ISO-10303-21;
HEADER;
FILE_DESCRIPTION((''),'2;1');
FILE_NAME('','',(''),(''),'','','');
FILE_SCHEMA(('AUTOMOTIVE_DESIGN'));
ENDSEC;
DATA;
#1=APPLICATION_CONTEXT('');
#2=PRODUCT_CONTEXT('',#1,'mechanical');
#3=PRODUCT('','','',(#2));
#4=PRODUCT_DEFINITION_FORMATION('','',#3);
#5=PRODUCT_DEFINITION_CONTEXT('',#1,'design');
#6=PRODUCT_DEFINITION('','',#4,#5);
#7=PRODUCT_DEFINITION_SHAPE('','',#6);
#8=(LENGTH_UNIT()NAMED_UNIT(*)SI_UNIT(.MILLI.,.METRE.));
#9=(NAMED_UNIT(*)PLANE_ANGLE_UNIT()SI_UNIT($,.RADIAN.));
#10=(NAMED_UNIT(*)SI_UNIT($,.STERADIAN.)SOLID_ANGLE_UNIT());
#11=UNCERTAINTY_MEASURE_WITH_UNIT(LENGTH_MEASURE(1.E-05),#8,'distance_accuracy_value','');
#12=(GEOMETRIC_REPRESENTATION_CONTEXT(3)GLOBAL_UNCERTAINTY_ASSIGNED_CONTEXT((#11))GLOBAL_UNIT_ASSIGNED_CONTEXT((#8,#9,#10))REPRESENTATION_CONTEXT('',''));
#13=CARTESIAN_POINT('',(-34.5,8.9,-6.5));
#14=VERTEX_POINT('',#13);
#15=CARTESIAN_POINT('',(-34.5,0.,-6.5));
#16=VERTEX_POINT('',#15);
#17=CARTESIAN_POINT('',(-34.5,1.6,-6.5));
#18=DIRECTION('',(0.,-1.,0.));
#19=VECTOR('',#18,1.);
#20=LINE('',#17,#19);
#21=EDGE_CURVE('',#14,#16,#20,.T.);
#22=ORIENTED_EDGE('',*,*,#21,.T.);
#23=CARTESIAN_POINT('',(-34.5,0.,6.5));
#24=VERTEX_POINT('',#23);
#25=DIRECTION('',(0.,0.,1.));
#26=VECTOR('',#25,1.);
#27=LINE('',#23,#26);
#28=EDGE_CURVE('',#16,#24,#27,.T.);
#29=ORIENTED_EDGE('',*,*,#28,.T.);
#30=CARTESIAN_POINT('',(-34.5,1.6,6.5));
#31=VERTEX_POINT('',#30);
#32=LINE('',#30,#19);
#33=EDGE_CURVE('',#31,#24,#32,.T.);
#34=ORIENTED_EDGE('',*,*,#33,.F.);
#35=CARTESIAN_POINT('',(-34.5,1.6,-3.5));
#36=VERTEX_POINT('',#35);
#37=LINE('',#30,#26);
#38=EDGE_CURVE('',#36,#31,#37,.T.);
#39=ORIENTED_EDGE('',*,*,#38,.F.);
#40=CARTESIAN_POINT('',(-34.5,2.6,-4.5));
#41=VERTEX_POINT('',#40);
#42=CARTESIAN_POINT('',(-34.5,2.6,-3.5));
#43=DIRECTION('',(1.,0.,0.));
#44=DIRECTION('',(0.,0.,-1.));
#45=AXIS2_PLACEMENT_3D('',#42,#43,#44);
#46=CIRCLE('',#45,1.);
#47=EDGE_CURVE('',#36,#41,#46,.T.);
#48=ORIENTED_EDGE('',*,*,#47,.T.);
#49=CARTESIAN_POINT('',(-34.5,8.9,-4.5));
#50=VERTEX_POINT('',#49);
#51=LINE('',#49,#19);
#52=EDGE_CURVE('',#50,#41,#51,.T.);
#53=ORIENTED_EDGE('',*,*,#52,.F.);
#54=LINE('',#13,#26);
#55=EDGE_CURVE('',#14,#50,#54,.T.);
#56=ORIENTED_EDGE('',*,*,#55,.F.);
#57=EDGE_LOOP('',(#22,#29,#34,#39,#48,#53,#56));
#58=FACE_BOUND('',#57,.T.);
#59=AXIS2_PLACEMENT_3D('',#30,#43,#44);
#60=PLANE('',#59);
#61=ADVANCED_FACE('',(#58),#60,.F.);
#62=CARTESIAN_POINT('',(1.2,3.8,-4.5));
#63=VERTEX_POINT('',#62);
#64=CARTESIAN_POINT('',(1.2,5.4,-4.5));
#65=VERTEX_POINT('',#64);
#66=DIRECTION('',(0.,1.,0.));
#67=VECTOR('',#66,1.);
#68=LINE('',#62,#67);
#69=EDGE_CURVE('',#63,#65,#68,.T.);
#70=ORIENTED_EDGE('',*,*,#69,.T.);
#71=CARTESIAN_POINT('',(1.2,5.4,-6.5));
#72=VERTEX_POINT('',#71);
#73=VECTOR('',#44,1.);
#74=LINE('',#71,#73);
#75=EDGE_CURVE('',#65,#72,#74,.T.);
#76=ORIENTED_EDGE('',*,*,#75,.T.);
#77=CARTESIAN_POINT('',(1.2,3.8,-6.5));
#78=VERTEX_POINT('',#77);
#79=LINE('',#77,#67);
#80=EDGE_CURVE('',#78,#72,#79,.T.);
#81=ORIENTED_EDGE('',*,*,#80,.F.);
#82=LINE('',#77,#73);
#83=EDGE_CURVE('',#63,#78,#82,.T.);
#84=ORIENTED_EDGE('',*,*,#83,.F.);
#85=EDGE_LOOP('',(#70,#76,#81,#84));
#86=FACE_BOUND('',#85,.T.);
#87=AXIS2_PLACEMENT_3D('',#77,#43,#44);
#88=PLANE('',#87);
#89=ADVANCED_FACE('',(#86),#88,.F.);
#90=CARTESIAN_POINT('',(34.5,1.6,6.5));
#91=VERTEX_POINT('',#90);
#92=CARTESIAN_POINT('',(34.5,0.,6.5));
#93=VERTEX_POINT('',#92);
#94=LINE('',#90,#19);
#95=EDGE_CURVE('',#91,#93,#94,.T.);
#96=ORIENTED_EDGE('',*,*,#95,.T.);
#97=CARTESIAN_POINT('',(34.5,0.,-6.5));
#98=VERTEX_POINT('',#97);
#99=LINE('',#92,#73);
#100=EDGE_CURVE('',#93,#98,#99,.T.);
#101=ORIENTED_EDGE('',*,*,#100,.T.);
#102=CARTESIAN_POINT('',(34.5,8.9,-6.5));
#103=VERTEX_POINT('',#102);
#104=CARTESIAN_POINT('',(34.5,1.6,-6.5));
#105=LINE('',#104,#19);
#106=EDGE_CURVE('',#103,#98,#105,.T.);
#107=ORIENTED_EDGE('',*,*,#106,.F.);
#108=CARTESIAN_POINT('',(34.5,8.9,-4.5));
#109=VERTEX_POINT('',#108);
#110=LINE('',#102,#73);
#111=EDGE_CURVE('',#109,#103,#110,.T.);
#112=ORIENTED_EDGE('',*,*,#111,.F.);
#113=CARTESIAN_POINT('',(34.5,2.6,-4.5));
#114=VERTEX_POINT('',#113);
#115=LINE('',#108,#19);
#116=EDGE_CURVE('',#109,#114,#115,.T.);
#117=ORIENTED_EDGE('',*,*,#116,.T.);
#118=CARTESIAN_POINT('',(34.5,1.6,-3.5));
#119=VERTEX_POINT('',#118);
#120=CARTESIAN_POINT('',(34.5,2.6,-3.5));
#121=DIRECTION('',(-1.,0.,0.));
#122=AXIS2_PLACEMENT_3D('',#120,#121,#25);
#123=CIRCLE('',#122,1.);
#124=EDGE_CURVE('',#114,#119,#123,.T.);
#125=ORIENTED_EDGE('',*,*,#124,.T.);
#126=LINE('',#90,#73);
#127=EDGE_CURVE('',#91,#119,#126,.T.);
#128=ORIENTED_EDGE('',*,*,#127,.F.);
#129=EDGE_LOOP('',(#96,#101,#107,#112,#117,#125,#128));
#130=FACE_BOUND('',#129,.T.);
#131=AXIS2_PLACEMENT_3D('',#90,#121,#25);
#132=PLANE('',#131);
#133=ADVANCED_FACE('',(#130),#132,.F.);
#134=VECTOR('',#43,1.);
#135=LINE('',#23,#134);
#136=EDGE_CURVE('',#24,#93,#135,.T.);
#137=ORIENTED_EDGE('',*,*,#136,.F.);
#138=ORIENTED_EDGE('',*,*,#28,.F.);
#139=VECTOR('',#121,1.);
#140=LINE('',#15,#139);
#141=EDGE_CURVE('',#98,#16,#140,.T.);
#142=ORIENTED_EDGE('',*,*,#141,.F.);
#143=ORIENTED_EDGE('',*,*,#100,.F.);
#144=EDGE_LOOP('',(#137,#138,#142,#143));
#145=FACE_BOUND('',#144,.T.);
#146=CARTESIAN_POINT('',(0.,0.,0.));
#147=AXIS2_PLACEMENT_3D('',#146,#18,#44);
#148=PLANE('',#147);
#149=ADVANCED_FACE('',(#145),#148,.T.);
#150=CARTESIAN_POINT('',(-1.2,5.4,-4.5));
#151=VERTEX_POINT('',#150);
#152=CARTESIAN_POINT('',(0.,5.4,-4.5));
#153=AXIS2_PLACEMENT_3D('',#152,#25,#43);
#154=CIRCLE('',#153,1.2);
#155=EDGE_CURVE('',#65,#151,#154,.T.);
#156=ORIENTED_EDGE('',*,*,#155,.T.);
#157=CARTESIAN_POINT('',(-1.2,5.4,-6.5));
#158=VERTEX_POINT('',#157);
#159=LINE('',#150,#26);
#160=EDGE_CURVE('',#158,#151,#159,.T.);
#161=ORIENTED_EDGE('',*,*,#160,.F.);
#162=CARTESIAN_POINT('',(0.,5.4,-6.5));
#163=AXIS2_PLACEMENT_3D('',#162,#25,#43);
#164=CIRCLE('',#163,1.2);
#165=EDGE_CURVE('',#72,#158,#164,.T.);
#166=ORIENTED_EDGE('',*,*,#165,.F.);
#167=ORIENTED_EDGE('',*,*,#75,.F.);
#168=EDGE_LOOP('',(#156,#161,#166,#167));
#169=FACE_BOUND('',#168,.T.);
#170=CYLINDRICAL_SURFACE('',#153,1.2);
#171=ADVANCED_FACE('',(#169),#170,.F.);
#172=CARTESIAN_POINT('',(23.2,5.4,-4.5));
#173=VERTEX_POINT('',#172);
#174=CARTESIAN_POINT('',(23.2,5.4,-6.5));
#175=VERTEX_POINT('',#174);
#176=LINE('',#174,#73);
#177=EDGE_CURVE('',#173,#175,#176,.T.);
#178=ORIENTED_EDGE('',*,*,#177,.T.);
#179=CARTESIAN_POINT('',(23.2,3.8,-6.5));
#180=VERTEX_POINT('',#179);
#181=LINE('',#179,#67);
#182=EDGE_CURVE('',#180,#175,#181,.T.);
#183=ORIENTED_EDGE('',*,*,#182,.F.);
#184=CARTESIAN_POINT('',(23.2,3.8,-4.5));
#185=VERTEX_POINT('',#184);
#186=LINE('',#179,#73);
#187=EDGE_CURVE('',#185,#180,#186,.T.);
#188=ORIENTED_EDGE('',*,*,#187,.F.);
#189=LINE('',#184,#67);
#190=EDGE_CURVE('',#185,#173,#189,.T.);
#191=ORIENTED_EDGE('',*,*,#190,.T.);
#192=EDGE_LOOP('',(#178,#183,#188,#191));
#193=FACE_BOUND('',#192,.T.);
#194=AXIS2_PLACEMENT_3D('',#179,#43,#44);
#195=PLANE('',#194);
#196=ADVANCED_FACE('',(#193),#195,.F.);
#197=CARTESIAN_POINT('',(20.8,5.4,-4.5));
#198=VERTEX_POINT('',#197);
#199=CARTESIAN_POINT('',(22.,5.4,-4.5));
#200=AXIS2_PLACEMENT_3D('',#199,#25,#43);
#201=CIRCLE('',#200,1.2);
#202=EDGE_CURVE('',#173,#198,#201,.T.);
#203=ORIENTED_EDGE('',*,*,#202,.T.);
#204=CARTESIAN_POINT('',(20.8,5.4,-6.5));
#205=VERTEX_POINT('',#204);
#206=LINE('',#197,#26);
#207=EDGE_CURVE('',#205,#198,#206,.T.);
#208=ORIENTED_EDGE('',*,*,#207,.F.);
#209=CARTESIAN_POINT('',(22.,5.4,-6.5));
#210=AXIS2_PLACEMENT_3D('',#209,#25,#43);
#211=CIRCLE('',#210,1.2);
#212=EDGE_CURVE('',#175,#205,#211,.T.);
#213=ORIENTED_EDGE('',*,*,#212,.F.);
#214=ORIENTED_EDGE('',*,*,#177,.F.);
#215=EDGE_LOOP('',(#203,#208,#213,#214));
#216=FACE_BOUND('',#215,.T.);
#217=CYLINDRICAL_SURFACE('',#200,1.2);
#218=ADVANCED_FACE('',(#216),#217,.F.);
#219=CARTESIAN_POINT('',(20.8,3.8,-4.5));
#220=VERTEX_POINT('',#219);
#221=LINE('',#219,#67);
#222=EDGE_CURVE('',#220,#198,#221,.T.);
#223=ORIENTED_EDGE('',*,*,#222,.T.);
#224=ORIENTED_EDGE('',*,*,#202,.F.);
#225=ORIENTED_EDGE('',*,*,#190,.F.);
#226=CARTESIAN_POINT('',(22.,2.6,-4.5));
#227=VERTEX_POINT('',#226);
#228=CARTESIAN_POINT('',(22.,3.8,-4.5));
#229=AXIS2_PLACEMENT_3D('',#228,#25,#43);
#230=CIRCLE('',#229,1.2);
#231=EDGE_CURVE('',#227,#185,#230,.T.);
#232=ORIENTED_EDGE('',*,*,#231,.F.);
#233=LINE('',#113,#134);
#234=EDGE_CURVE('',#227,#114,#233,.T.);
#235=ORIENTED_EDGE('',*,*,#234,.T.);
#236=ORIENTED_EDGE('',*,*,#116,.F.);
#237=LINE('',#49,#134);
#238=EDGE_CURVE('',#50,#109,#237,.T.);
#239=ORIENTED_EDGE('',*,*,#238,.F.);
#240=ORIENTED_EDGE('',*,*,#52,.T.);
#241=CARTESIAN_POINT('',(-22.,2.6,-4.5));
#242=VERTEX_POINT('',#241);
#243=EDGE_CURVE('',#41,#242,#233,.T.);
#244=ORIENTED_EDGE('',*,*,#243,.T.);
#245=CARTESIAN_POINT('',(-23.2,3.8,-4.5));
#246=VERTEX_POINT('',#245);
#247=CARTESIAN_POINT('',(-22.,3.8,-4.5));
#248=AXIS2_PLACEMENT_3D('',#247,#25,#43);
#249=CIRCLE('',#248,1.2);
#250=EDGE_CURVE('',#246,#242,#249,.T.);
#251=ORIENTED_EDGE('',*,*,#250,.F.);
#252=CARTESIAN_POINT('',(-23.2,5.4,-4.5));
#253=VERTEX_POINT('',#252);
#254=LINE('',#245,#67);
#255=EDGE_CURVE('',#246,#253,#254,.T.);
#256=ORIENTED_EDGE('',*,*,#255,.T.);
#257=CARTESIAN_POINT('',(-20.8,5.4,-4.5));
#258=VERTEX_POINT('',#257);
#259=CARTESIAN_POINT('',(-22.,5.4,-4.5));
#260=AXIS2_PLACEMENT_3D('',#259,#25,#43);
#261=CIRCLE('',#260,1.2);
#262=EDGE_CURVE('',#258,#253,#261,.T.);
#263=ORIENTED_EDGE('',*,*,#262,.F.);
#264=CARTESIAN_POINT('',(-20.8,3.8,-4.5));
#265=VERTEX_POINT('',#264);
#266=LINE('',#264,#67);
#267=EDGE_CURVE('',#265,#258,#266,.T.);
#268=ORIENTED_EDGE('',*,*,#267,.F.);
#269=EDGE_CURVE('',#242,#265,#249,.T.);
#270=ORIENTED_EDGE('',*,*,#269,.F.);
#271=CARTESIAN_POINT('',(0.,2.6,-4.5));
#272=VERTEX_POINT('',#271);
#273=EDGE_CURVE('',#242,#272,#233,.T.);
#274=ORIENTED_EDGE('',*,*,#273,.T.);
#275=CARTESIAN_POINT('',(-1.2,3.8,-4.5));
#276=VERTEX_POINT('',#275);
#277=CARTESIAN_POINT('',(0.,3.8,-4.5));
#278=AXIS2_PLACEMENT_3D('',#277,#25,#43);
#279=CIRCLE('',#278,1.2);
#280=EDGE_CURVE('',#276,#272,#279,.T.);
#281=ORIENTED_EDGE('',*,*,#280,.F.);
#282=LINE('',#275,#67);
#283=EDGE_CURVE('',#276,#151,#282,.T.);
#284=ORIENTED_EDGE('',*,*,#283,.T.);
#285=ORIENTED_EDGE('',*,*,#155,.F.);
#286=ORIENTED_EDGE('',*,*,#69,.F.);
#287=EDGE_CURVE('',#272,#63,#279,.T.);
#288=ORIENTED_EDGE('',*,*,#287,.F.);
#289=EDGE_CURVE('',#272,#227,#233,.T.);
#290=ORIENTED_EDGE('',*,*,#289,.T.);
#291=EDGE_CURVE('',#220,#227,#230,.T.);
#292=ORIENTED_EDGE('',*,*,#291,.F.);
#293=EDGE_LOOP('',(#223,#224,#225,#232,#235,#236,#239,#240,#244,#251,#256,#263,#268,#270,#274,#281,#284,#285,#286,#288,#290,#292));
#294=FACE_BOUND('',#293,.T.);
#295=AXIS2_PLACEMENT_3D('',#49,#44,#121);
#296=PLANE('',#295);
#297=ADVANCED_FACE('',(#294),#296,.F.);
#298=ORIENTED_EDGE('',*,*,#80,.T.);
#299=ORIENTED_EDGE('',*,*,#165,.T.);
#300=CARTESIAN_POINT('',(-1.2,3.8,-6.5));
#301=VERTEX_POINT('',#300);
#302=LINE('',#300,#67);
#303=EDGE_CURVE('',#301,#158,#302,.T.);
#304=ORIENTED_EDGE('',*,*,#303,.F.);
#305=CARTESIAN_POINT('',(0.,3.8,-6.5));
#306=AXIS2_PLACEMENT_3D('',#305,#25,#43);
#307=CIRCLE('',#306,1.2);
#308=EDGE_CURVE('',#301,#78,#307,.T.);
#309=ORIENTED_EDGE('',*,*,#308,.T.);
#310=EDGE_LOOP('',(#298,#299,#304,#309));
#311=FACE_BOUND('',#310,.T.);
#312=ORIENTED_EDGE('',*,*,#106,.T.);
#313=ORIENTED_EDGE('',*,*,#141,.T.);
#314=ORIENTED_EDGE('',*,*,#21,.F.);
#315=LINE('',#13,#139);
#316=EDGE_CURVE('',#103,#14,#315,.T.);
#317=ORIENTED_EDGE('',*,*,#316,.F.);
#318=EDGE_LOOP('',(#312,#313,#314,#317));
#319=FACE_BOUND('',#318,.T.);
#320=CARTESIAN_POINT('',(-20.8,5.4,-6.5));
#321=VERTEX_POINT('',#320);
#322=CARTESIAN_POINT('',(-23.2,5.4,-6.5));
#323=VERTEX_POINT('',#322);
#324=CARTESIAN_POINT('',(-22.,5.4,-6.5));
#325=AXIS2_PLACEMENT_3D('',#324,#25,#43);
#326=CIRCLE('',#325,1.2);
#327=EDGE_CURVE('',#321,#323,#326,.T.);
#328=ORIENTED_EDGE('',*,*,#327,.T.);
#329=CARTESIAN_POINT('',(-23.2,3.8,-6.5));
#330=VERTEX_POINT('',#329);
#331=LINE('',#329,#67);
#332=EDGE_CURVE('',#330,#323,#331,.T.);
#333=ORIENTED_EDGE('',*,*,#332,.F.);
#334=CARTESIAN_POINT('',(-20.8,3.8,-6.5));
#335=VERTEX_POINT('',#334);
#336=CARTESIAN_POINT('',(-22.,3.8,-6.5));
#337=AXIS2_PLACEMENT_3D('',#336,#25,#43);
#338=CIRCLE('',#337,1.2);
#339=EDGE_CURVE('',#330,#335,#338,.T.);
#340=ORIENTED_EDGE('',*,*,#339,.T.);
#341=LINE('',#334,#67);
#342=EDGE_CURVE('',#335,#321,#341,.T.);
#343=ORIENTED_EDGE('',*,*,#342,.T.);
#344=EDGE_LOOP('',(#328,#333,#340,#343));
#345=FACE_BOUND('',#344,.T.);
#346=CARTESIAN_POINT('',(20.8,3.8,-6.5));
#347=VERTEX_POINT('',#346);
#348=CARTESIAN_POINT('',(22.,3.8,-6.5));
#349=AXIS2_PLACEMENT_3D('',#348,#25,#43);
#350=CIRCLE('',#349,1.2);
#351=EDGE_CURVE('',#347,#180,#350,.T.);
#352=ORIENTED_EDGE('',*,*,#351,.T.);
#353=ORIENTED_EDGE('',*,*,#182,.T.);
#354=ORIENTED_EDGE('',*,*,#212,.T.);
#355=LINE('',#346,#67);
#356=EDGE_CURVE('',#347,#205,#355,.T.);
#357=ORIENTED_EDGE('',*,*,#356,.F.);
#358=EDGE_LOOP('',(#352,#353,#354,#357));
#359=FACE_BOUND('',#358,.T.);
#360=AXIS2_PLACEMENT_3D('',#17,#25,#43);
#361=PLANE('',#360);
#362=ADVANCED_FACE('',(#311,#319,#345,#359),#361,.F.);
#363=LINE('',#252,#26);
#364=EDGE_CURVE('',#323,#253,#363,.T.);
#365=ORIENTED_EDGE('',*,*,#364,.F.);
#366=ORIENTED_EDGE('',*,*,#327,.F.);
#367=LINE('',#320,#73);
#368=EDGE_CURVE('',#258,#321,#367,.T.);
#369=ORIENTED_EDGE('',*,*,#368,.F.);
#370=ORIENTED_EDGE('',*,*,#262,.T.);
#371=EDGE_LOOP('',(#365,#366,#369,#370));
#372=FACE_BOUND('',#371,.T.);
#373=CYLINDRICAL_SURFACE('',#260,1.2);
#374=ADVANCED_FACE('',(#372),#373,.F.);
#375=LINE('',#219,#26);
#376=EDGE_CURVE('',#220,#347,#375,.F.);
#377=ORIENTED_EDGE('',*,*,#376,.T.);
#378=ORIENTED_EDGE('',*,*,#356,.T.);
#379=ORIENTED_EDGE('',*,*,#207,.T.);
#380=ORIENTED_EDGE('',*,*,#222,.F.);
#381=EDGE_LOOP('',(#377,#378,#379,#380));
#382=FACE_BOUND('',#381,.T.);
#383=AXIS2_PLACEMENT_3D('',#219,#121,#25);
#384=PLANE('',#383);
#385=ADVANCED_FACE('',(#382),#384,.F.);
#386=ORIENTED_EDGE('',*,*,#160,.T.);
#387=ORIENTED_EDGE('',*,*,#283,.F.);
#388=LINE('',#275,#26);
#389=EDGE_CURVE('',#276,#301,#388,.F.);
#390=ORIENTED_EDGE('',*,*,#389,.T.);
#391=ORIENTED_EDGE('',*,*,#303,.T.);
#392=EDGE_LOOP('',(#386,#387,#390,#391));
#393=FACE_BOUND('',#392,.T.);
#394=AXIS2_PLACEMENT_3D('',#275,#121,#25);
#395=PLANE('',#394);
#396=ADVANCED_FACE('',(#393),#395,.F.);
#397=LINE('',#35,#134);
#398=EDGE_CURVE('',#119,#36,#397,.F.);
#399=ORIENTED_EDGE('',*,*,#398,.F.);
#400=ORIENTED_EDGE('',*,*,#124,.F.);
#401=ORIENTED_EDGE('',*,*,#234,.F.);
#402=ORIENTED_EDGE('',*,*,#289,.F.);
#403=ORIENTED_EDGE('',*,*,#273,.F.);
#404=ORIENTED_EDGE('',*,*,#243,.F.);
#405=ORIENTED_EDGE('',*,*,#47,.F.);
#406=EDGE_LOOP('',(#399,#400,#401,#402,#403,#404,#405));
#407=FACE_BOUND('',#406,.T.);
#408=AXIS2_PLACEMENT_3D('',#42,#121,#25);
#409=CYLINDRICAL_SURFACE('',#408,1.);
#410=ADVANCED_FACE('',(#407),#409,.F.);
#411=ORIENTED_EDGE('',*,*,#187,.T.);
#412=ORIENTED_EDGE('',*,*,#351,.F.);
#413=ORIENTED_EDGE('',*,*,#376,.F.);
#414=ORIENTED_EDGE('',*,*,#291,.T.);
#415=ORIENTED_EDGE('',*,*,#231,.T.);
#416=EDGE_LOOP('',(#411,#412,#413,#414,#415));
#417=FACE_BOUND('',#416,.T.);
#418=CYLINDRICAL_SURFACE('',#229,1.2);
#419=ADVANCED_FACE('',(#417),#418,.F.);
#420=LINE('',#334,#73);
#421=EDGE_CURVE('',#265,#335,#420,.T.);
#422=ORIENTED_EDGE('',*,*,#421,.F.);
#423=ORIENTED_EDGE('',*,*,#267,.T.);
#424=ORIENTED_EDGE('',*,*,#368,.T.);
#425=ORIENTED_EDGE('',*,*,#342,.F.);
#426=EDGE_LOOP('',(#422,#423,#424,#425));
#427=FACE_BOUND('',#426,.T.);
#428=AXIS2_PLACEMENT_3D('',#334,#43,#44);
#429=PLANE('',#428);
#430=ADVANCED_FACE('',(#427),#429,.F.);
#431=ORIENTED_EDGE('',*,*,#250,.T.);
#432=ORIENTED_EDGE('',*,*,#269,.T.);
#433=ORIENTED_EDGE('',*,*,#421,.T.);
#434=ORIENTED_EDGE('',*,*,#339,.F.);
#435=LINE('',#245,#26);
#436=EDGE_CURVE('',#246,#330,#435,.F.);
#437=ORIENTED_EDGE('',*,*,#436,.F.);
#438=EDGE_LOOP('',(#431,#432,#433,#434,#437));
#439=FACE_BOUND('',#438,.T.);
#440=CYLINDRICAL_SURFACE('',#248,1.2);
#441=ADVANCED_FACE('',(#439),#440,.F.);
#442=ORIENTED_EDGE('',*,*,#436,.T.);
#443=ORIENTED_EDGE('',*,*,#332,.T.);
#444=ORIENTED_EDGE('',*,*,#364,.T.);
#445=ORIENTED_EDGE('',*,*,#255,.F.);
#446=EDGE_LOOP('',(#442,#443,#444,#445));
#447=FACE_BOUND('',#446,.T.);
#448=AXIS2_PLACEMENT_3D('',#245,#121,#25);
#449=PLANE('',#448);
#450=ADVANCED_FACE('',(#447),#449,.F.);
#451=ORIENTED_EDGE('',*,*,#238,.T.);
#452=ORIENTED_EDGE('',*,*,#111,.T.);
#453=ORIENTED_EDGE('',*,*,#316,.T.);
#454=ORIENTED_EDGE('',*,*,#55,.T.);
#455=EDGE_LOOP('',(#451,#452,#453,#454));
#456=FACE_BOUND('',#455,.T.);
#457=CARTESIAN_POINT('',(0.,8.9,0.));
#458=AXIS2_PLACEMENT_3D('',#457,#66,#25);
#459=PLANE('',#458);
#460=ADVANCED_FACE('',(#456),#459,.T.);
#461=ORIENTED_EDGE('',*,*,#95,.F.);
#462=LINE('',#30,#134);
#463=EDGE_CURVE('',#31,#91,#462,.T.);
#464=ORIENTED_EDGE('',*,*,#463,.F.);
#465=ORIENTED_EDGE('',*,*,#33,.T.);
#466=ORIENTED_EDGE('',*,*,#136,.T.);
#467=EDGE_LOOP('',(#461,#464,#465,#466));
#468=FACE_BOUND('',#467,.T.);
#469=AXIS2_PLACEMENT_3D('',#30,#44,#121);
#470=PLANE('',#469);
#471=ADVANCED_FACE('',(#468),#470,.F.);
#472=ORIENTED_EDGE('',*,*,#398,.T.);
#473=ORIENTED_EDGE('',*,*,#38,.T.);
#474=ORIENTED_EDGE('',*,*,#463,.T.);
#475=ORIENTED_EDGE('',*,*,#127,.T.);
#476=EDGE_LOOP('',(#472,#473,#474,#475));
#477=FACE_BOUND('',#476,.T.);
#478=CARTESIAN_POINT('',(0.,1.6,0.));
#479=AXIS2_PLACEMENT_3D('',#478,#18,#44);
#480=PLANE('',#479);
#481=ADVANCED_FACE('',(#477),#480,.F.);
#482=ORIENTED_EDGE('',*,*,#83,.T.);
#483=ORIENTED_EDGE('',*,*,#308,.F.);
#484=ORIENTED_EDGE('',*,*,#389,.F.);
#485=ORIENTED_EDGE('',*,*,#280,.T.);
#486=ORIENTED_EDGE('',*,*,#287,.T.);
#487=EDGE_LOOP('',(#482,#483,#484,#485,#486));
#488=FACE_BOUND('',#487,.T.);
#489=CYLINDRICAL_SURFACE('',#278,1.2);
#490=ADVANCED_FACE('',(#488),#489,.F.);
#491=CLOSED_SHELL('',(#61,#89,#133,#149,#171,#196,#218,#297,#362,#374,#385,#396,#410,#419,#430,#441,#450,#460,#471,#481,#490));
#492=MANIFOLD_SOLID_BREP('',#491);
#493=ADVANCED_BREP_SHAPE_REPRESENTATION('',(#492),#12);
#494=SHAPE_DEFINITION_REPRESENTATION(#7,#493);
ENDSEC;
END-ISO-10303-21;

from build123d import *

# Parameters (mm, degrees)
SKETCH1_W                = 69
SKETCH1_H                = 13
BOSS_EXTRUDE1_DEPTH      = 1.6
SKETCH2_W                = 69
SKETCH2_H                = 2
BOSS_EXTRUDE2_DEPTH      = 7.3
FILLET1_R                = 1
M2_START                 = -6.5
M2_CLEARANCE_SLOT1_DEPTH = 2


# Read off the part's stored shape, not the designer's step: M2 Clearance Slot1
with BuildPart() as part:
    # Sketch1 → Boss-Extrude1 (new body)
    with BuildSketch(Plane(origin=(0, 0, 0), x_dir=(1, 0, 0), z_dir=(0, 1, 0))):
        Rectangle(SKETCH1_W, SKETCH1_H)
    extrude(amount=BOSS_EXTRUDE1_DEPTH)

    # Sketch2 → Boss-Extrude2 (add)
    with BuildSketch(Plane(origin=(0, 1.6, 0), x_dir=(1, 0, 0), z_dir=(0, 1, 0))):
        with Locations((0, 5.5)):
            Rectangle(SKETCH2_W, SKETCH2_H)
    extrude(amount=BOSS_EXTRUDE2_DEPTH)

    # Fillet1
    fillet1_edges = [part.edges().sort_by_distance(p)[0] for p in [
        (0, 1.6, -4.5),
    ]]
    fillet(fillet1_edges, radius=FILLET1_R)

    # M2 Clearance Slot1 outline → M2 Clearance Slot1 (cut)
    with BuildSketch(Plane.XY.offset(M2_START)):
        with BuildLine():
            Line((23.2, 3.8), (23.2, 5.4))
            ThreePointArc((23.2, 5.4), (22, 6.6), (20.8, 5.4))
            Line((20.8, 5.4), (20.8, 3.8))
            ThreePointArc((20.8, 3.8), (22, 2.6), (23.2, 3.8))
        make_face()
        with BuildLine():
            Line((1.2, 3.8), (1.2, 5.4))
            ThreePointArc((1.2, 5.4), (0, 6.6), (-1.2, 5.4))
            Line((-1.2, 5.4), (-1.2, 3.8))
            ThreePointArc((-1.2, 3.8), (0, 2.6), (1.2, 3.8))
        make_face()
        with BuildLine():
            Line((-20.8, 3.8), (-20.8, 5.4))
            ThreePointArc((-20.8, 5.4), (-22, 6.6), (-23.2, 5.4))
            Line((-23.2, 5.4), (-23.2, 3.8))
            ThreePointArc((-23.2, 3.8), (-22, 2.6), (-20.8, 3.8))
        make_face()
    extrude(amount=M2_CLEARANCE_SLOT1_DEPTH, mode=Mode.SUBTRACT)


solid = part.part
